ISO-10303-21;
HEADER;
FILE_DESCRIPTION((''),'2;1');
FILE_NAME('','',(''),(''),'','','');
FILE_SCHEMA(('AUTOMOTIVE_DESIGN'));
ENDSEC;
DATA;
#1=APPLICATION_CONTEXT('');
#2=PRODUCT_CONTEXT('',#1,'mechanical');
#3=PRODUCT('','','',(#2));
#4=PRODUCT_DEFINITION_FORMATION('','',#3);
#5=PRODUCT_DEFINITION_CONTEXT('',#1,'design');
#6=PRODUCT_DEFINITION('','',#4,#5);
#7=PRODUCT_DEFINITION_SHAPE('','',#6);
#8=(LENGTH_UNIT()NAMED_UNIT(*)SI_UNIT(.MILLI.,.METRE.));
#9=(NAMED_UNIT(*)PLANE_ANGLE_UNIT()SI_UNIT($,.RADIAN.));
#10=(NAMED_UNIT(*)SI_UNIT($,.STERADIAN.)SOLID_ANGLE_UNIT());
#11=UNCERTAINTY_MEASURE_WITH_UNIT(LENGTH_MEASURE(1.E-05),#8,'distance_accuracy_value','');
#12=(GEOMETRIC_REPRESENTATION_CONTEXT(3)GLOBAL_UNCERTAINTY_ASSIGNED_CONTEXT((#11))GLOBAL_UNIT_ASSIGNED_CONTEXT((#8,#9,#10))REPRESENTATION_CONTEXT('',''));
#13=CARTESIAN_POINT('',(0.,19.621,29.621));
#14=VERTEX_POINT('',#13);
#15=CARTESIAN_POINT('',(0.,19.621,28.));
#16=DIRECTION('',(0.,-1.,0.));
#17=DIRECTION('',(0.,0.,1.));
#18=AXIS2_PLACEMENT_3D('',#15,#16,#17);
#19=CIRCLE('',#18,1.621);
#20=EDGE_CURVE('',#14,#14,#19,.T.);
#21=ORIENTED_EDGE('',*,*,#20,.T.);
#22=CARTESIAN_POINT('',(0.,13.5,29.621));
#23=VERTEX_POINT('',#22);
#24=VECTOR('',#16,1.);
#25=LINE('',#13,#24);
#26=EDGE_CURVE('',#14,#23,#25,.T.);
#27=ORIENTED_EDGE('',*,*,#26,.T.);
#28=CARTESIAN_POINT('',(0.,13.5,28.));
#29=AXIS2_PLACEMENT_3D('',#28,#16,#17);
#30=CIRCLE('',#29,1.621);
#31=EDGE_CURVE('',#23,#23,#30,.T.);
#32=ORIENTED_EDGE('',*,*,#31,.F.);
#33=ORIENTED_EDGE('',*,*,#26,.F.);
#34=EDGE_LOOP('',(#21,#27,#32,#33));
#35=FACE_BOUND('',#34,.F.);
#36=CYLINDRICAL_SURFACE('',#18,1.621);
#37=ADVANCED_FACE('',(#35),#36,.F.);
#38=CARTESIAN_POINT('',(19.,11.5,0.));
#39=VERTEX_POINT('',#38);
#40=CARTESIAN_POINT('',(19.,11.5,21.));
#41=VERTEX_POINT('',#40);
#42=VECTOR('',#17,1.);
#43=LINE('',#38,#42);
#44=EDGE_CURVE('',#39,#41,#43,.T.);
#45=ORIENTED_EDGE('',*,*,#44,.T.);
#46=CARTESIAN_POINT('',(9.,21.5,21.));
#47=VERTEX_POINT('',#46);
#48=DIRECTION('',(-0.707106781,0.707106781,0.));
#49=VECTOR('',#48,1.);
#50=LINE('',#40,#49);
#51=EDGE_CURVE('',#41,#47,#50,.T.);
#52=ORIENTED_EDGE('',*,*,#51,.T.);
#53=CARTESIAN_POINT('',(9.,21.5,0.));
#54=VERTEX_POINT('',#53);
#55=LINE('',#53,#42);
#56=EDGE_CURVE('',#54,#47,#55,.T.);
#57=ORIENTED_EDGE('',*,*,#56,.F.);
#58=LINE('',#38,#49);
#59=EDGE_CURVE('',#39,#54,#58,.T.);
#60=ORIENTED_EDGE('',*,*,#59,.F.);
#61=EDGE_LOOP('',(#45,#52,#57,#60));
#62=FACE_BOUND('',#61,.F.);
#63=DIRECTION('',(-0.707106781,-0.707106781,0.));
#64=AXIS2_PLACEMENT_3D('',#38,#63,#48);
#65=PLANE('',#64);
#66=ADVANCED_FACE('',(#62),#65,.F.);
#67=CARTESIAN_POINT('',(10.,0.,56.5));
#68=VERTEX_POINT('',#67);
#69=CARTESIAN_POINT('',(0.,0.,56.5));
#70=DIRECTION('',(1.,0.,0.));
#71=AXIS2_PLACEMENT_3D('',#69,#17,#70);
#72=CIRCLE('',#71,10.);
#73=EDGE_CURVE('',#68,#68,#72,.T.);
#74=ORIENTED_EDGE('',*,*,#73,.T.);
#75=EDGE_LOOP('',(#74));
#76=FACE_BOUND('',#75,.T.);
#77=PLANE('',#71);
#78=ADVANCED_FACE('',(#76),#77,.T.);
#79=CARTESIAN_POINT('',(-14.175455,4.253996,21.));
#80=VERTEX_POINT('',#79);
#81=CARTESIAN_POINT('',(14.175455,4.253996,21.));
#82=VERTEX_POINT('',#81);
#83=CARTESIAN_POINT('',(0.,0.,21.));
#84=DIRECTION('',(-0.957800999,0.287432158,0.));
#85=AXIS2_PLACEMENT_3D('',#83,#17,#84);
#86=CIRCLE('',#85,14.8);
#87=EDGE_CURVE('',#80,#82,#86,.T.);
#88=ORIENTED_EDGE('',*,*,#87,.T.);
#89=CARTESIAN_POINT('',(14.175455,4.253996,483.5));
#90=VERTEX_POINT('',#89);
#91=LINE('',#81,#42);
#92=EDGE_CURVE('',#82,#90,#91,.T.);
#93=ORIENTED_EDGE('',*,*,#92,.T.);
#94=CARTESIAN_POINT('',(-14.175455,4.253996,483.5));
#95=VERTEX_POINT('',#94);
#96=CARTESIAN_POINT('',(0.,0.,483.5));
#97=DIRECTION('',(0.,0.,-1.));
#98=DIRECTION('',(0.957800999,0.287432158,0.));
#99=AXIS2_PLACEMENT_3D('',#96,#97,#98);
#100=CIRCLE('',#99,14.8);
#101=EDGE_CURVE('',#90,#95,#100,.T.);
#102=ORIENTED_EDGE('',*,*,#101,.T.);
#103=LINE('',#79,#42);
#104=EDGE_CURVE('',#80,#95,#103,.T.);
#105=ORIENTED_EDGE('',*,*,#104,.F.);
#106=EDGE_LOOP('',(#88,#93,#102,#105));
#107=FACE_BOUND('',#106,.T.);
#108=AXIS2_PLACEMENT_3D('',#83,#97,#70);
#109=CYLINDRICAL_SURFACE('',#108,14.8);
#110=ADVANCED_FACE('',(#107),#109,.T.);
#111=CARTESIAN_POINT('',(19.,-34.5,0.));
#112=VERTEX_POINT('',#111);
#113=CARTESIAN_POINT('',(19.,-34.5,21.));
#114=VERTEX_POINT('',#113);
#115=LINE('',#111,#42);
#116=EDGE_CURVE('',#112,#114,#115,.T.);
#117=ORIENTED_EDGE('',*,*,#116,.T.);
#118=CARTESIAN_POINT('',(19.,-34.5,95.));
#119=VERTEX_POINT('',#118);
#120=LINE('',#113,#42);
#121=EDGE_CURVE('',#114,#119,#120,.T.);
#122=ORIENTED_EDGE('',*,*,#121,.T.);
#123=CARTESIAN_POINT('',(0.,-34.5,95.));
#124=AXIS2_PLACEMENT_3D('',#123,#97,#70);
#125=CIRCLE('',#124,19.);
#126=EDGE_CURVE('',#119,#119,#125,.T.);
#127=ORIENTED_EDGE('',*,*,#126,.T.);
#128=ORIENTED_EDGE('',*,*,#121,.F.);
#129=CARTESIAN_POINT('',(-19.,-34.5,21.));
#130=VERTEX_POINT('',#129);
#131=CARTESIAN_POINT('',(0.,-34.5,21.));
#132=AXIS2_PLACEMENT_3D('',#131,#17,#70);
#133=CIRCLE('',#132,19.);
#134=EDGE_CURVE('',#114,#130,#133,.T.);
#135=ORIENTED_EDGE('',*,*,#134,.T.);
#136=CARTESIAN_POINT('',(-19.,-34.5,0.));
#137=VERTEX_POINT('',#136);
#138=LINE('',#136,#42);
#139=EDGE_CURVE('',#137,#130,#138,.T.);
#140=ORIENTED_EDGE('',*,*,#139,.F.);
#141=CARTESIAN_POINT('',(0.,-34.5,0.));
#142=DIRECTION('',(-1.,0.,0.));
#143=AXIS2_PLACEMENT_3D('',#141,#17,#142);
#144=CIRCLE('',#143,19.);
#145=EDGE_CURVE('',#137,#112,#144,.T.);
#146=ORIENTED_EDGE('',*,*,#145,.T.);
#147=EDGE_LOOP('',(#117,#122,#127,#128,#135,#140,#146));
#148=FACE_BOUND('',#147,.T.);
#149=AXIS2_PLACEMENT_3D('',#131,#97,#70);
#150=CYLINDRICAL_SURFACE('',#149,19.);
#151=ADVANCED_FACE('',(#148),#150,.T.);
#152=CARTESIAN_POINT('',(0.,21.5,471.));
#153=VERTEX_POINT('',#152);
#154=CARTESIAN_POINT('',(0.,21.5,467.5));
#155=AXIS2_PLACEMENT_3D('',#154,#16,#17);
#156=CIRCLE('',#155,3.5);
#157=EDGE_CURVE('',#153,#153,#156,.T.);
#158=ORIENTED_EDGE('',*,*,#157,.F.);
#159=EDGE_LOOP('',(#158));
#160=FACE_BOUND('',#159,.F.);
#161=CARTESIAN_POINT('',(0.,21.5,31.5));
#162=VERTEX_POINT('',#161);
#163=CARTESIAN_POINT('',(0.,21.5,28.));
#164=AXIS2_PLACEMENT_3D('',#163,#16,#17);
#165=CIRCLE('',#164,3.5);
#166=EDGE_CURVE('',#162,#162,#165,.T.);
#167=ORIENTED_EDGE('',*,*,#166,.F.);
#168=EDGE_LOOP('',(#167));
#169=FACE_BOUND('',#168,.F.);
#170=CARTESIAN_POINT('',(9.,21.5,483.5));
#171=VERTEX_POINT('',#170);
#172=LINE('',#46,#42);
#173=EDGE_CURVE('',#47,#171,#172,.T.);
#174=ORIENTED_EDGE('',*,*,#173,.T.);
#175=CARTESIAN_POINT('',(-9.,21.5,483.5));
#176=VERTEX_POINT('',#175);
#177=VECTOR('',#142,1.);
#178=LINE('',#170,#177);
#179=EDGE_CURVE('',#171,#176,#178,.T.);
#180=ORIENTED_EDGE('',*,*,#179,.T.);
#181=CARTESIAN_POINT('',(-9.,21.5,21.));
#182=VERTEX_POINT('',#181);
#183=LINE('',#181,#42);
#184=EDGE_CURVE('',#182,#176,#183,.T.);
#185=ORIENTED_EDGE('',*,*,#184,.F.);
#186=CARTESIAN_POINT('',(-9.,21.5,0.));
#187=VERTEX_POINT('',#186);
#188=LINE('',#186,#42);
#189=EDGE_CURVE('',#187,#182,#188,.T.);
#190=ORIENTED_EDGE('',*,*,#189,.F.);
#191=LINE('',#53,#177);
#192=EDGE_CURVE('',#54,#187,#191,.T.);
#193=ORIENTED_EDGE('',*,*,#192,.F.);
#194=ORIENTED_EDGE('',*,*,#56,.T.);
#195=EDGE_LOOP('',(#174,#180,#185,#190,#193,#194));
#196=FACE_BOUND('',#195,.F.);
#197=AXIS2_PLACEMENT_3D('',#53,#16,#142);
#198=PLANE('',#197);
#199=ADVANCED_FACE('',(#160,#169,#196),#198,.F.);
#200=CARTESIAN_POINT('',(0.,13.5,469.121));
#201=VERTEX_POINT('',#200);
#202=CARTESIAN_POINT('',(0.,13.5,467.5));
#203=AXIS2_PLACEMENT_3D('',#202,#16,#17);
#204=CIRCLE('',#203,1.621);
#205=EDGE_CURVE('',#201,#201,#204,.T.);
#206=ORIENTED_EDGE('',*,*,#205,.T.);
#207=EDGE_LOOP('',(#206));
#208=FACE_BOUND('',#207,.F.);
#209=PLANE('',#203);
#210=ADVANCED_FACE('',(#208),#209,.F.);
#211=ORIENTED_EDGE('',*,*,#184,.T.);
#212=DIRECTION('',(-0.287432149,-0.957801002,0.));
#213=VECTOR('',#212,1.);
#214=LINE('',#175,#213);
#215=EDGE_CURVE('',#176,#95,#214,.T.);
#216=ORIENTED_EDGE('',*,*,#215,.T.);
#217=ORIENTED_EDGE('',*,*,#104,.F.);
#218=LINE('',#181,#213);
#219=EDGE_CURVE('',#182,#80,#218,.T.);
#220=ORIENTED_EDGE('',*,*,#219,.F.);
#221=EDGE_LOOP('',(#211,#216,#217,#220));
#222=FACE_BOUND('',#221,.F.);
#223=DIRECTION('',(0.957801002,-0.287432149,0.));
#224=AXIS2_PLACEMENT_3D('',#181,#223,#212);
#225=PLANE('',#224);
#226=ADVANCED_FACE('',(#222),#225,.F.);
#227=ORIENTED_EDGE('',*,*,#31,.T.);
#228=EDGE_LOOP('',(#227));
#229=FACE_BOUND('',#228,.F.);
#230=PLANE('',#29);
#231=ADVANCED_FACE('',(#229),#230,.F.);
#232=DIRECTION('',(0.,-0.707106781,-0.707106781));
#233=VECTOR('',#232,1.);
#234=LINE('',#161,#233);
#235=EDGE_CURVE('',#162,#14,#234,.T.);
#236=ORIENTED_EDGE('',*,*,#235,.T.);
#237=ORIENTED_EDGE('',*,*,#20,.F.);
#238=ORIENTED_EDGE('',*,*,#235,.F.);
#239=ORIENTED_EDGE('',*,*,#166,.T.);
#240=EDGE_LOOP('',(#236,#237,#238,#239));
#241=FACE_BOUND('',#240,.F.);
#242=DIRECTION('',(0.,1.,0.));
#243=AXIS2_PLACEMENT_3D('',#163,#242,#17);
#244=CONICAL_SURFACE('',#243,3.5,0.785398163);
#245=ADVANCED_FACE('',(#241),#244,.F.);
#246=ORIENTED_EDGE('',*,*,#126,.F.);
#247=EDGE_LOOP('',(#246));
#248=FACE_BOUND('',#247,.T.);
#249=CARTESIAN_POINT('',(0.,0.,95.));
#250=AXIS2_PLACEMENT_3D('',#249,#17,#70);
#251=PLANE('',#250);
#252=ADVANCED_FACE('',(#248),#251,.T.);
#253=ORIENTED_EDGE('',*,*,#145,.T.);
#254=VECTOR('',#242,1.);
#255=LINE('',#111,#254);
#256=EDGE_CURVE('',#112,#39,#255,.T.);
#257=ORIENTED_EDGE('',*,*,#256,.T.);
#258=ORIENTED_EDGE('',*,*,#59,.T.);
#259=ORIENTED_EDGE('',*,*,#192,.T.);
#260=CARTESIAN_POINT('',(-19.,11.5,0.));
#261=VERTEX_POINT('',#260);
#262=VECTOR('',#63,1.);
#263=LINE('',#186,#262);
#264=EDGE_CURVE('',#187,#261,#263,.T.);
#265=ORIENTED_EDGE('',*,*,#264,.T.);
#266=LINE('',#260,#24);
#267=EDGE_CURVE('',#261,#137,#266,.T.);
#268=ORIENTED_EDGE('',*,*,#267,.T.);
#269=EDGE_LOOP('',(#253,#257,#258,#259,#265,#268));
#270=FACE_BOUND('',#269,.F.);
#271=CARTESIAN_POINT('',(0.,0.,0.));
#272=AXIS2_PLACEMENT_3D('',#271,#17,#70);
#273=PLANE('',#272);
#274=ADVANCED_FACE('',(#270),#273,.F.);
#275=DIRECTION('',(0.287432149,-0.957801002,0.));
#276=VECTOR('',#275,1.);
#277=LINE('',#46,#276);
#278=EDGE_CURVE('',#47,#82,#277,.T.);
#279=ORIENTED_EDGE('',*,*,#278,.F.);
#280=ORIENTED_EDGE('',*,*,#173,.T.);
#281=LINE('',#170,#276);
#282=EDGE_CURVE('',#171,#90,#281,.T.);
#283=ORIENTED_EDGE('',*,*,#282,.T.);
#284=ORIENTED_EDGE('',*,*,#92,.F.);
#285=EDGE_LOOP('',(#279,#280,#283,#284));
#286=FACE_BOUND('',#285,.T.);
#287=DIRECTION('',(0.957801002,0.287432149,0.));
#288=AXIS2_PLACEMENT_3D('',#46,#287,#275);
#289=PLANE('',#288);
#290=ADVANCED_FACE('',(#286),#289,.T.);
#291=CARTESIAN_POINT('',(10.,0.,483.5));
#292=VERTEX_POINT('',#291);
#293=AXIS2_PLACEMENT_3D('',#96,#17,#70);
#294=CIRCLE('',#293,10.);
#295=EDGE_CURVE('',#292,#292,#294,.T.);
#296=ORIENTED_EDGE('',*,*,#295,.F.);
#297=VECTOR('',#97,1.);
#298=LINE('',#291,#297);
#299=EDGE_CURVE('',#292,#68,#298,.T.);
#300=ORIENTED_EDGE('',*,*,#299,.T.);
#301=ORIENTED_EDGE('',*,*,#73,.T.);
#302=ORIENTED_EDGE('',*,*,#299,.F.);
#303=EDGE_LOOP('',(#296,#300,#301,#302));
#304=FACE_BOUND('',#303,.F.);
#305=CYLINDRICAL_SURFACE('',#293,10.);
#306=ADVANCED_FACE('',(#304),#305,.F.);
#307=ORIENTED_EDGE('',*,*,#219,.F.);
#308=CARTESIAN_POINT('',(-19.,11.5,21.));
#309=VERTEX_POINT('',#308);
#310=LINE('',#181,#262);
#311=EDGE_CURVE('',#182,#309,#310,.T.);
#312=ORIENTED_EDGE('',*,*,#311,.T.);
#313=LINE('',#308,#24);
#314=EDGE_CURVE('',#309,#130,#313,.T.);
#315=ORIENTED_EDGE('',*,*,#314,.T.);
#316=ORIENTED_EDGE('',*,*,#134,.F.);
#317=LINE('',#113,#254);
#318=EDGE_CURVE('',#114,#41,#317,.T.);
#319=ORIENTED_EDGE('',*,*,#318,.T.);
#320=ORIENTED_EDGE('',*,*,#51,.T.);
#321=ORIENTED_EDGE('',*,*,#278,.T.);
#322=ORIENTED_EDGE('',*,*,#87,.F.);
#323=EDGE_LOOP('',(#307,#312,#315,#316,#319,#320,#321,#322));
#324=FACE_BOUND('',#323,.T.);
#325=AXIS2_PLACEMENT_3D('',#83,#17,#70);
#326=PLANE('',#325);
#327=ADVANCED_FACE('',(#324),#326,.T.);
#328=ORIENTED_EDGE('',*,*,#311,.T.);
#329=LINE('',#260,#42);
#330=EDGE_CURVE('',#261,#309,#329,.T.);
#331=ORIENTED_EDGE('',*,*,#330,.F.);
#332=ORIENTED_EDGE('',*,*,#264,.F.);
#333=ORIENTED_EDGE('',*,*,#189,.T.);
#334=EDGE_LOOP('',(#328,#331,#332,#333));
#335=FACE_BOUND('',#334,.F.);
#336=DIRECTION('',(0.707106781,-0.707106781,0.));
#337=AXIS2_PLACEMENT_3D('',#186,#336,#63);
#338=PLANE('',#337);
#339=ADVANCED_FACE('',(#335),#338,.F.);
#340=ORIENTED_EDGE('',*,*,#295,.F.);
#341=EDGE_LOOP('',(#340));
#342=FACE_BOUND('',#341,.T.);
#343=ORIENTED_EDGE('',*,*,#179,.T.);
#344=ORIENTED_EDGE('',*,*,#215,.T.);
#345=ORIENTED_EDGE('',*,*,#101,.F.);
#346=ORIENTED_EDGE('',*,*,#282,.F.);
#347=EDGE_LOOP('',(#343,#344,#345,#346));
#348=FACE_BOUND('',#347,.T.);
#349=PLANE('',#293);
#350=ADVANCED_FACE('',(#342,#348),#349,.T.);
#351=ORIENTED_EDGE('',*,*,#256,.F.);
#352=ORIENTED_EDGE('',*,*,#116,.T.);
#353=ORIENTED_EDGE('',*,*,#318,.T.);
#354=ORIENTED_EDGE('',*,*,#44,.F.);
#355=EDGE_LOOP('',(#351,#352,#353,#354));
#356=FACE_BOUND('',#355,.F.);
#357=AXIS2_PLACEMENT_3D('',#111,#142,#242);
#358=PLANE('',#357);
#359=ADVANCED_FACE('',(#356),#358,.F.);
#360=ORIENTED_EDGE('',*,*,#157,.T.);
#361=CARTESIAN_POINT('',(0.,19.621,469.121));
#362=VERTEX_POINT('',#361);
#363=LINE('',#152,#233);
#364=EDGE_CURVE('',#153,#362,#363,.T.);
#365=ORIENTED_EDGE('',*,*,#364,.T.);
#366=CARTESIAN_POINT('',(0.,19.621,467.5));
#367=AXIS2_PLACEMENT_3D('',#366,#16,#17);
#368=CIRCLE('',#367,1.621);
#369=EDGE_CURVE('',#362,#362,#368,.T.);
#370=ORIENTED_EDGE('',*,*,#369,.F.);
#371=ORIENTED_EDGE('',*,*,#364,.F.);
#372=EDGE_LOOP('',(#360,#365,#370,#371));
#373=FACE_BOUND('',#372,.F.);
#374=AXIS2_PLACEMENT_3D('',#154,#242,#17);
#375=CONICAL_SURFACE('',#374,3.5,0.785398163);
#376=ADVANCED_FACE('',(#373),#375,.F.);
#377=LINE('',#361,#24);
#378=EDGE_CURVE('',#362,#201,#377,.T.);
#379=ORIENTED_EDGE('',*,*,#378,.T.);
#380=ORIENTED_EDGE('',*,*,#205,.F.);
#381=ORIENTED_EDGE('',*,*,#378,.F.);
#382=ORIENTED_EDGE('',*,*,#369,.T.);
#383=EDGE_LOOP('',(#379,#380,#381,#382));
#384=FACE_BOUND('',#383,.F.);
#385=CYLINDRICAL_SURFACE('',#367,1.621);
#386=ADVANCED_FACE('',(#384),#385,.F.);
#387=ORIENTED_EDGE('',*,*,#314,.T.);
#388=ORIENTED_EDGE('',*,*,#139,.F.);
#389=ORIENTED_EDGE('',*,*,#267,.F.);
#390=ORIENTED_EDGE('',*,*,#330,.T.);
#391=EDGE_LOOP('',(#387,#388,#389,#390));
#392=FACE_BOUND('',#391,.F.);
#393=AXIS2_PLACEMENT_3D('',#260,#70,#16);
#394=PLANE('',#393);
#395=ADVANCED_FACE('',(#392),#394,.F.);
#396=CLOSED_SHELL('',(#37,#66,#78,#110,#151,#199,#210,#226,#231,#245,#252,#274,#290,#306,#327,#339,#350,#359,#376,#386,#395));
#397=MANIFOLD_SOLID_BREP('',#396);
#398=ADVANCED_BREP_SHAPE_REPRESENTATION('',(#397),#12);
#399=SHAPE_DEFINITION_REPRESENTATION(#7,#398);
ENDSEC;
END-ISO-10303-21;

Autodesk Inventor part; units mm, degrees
ref_plane "YZ Plane" through (0, 0, 0) normal (1, 0, 0) x (0, 1, 0)
ref_plane "XZ Plane" through (0, 0, 0) normal (0, 1, 0) x (-1, 0, 0)
ref_plane "XY Plane" through (0, 0, 0) normal (0, 0, 1) x (1, 0, 0)
sketch "Sketch1" plane through (0, 0, 0) normal (0, 0, 1) x (1, 0, 0)
  circle A0 centre (0, 0) radius 14.8
  line L0 (-9, 21.5) -> (9, 21.5)
  line L1 (-9, 21.5) -> (-19, 11.5)
  line L2 (-19, 11.5) -> (-19, -34.776357)
  circle A1 centre (0, -34.5) radius 19
  line L3 (0, 21.5) -> (0, -34.5) construction
  line L4 (9, 21.5) -> (19, 11.5)
  line L5 (19, 11.5) -> (19, -34.776357)
  point P0 (-19, -34.5)
  point P1 (19, -34.5)
  dimension "d0" = 29.6
  dimension "d1" = 18
  dimension "d2" = 21.5
  dimension "d3" = 38
  dimension "d4" = 56
  dimension "d5" = 45
sketch "Sketch1 outline for Extrusion1" plane through (0, 0, 0) normal (0, 0, 1) x (1, 0, 0)
  line L0 (19, 11.5) -> (9, 21.5)
  line L1 (19, -34.5) -> (19, 11.5)
  arc A0 (-19, -34.5) -> (19, -34.5) centre (0, -34.5) ccw
  line L2 (-19, 11.5) -> (-19, -34.5)
  line L3 (-9, 21.5) -> (-19, 11.5)
  line L4 (9, 21.5) -> (-9, 21.5)
extrude "Extrusion1" add sketch "Sketch1 outline for Extrusion1" along normal blind 21
sketch "Sketch2" plane through (0, 0, 21) normal (0, 0, 1) x (1, 0, 0)
  line L0 (9, 21.5) -> (-9, 21.5)
  circle A0 centre (0, 0) radius 14.8
  line L1 (-9, 21.5) -> (-14.175455, 4.253996)
  line L2 (9, 21.5) -> (14.175455, 4.253996)
  line L3 (9, 21.5) -> (-9, 21.5)
  line L4 (-9, 21.5) -> (9, 21.5)
  dimension "d8" = 29.6
extrude "Extrusion2" add sketch "Sketch2" along normal blind 462.5
sketch "Sketch3" plane through (0, 0, 21) normal (0, 0, 1) x (1, 0, 0)
  arc A0 (-19, -34.5) -> (19, -34.5) centre (0, -34.5) ccw projected
  circle A1 centre (0, -34.5) radius 19
  point P0 (0, 0)
  point P1 (19, -34.5)
  point P2 (-19, -34.5)
extrude "Extrusion3" add sketch "Sketch3" along normal blind 74
sketch "Sketch4" plane through (-9, 21.5, 0) normal (0, 1, 0) x (1, 0, 0)
  line L0 (18, 0) -> (0, 0) projected
  line L1 (0, 0) -> (0, -21) projected
  line L2 (0, -21) -> (0, -483.5) projected
  line L3 (18, -483.5) -> (0, -483.5) projected
  line L4 (18, -21) -> (18, -483.5) projected
  line L5 (18, 0) -> (18, -21) projected
  line L6 (-16, -473) -> (34, -473)
  point P0 (9, 0)
  point P1 (9, -473)
  point P2 (9, -483.5)
  dimension "d13" = 50
  dimension "d14" = 10.5
split_face "Split1"
sketch "Sketch5" plane through (0, 0, 483.5) normal (0, 0, 1) x (1, 0, 0)
  circle A0 centre (0, 0) radius 10
  dimension "d15" = 20
extrude "Extrusion4" cut sketch "Sketch5" against normal blind 427
sketch "Sketch6" plane through (-9, 21.5, 0) normal (0, 1, 0) x (1, 0, 0)
  line L0 (18, -473) -> (0, -473) projected
  line L1 (18, -21) -> (18, -473) projected
  line L2 (18, 0) -> (18, -21) projected
  line L3 (18, 0) -> (0, 0) projected
  line L4 (0, 0) -> (0, -21) projected
  line L5 (0, -21) -> (0, -473) projected
  line L6 (18, -473) -> (0, -473) projected
  line L7 (0, -473) -> (0, -483.5) projected
  line L8 (18, -483.5) -> (0, -483.5) projected
  line L9 (18, -473) -> (18, -483.5) projected
  point P0 (9, 0)
  point P1 (9, -467.5)
  point P2 (9, -28)
  point P3 (9, 0)
  point P4 (9, -483.5)
  dimension "d18" = 28
  dimension "d19" = 16
hole "Hole1" at (0, 21.5, 467.5) at (0, 21.5, 28) direction (0, -1, 0) diameter 3.242 depth 8 countersink diameter 7 countersink angle 90 thread size "M4x0.7" class "6H" standard "ISO Metric profile"
properties part number "Linear Motor (T-Frame)" material "Aluminum 6061"
